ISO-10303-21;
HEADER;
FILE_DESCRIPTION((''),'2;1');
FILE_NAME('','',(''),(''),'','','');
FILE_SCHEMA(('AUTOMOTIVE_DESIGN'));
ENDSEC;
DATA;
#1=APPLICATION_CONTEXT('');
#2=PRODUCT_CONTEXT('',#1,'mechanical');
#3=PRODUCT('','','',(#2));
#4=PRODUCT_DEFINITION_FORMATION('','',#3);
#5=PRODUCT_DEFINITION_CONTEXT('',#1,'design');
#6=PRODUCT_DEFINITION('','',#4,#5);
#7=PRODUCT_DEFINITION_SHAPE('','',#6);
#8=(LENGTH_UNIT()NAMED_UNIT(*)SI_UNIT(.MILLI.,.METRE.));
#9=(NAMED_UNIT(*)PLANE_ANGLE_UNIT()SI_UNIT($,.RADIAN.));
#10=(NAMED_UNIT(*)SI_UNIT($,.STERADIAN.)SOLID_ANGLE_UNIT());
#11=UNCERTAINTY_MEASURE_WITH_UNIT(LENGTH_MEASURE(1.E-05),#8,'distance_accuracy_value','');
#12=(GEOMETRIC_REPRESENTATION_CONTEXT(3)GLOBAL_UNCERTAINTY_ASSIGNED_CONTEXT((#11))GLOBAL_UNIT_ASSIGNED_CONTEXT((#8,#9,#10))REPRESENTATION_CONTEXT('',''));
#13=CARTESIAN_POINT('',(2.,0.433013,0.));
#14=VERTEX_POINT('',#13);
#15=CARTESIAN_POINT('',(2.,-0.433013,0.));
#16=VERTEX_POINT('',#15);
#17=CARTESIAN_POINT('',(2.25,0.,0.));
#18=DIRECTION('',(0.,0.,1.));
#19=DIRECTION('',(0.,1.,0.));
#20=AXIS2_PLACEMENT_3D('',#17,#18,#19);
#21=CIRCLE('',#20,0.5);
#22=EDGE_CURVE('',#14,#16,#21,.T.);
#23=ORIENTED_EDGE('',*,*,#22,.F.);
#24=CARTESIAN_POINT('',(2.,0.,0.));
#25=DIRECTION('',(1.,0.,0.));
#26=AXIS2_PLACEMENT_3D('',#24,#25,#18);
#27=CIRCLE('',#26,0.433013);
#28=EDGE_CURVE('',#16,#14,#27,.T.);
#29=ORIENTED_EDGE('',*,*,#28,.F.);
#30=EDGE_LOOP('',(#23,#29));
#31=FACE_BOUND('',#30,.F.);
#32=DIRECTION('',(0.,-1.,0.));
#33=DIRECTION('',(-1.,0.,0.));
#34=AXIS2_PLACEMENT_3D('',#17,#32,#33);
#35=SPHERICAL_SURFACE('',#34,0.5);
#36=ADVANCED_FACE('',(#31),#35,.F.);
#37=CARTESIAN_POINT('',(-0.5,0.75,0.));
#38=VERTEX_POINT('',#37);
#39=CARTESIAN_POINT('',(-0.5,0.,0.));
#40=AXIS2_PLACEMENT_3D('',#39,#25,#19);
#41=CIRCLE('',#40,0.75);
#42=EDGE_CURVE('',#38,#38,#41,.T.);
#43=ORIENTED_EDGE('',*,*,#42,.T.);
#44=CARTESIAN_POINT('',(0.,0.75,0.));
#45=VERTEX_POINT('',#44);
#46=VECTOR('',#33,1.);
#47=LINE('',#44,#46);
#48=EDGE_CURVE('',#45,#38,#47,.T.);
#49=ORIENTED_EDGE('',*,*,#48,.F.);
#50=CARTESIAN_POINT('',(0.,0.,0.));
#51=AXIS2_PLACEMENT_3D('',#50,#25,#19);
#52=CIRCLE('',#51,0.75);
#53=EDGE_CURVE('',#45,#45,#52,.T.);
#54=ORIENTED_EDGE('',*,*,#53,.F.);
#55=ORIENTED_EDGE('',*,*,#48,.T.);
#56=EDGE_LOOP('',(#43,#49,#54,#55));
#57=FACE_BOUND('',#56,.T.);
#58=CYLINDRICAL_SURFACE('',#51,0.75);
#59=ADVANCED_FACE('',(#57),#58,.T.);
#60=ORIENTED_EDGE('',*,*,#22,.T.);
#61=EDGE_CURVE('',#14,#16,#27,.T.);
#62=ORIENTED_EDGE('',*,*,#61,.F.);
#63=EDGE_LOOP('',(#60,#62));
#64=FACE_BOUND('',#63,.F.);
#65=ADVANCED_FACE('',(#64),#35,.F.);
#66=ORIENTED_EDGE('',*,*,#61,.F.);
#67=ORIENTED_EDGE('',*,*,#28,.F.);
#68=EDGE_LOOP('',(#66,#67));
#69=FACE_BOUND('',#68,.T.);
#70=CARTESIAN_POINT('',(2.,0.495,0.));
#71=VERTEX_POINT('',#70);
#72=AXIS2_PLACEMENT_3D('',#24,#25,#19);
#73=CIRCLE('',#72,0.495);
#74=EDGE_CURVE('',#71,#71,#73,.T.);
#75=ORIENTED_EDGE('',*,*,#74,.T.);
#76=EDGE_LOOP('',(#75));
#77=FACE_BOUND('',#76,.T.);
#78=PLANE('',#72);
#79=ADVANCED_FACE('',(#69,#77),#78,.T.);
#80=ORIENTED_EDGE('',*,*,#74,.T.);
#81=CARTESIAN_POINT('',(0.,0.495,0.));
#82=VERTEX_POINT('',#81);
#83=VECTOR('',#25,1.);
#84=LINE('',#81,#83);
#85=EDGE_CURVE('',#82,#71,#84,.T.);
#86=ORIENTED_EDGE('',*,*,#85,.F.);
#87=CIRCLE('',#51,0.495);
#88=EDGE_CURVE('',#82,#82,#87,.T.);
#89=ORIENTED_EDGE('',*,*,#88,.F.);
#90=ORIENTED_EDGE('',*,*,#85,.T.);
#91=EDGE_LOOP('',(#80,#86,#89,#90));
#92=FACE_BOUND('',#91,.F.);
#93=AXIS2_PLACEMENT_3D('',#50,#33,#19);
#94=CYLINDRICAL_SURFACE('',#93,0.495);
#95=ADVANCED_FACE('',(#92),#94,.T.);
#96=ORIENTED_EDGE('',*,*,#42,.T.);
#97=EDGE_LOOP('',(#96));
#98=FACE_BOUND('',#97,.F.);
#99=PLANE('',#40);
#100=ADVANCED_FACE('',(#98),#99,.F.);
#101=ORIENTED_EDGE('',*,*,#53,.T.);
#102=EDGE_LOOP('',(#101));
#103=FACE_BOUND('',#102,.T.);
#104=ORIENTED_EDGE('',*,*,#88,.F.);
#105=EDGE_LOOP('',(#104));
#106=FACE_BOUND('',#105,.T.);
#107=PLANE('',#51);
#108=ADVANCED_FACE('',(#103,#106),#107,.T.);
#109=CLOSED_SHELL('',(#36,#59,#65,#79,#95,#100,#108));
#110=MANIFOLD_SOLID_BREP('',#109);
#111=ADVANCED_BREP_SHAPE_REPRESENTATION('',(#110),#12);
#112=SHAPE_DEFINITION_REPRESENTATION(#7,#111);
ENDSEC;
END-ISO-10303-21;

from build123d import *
from build123d import SkipClean  # not in build123d's __all__

# Parameters (mm, degrees)
F0_R      = 0.495
F1_DEPTH  = 2
F0_R_2    = 0.75
F1_FACE_R = 0.495
F2_DEPTH  = 0.5


with BuildPart() as f1:
    # F0 (on Right) → F1 (new body)
    with BuildSketch(Plane.YZ):
        Circle(F0_R)
    extrude(amount=F1_DEPTH)

    # F0 (on Right) + F1_face (on face) → F2 (join)
    with BuildSketch(Plane.YZ):
        Circle(F0_R_2)
        Circle(F0_R, mode=Mode.SUBTRACT)
    with BuildSketch(Plane(origin=(0, 0, 0), x_dir=(0, 1, 0), z_dir=(-1, 0, 0))):
        Circle(F1_FACE_R)
    extrude(amount=-F2_DEPTH, dir=(1, 0, 0))

    # F3 (on Top) → F4 (revolve, cut)
    with BuildSketch(Plane.XY):
        with BuildLine():
            Line((2.25, -0.5), (2.25, 0.5))
            ThreePointArc((2.25, 0.5), (1.75, 0), (2.25, -0.5))
        make_face()
    with SkipClean():  # cleaning this boolean's faces spoils the solid; the shape is the same uncleaned
        revolve(axis=Axis((2.25, 0.0427489867, 0), (0, -1, 0)), mode=Mode.SUBTRACT)


solid = f1.part
